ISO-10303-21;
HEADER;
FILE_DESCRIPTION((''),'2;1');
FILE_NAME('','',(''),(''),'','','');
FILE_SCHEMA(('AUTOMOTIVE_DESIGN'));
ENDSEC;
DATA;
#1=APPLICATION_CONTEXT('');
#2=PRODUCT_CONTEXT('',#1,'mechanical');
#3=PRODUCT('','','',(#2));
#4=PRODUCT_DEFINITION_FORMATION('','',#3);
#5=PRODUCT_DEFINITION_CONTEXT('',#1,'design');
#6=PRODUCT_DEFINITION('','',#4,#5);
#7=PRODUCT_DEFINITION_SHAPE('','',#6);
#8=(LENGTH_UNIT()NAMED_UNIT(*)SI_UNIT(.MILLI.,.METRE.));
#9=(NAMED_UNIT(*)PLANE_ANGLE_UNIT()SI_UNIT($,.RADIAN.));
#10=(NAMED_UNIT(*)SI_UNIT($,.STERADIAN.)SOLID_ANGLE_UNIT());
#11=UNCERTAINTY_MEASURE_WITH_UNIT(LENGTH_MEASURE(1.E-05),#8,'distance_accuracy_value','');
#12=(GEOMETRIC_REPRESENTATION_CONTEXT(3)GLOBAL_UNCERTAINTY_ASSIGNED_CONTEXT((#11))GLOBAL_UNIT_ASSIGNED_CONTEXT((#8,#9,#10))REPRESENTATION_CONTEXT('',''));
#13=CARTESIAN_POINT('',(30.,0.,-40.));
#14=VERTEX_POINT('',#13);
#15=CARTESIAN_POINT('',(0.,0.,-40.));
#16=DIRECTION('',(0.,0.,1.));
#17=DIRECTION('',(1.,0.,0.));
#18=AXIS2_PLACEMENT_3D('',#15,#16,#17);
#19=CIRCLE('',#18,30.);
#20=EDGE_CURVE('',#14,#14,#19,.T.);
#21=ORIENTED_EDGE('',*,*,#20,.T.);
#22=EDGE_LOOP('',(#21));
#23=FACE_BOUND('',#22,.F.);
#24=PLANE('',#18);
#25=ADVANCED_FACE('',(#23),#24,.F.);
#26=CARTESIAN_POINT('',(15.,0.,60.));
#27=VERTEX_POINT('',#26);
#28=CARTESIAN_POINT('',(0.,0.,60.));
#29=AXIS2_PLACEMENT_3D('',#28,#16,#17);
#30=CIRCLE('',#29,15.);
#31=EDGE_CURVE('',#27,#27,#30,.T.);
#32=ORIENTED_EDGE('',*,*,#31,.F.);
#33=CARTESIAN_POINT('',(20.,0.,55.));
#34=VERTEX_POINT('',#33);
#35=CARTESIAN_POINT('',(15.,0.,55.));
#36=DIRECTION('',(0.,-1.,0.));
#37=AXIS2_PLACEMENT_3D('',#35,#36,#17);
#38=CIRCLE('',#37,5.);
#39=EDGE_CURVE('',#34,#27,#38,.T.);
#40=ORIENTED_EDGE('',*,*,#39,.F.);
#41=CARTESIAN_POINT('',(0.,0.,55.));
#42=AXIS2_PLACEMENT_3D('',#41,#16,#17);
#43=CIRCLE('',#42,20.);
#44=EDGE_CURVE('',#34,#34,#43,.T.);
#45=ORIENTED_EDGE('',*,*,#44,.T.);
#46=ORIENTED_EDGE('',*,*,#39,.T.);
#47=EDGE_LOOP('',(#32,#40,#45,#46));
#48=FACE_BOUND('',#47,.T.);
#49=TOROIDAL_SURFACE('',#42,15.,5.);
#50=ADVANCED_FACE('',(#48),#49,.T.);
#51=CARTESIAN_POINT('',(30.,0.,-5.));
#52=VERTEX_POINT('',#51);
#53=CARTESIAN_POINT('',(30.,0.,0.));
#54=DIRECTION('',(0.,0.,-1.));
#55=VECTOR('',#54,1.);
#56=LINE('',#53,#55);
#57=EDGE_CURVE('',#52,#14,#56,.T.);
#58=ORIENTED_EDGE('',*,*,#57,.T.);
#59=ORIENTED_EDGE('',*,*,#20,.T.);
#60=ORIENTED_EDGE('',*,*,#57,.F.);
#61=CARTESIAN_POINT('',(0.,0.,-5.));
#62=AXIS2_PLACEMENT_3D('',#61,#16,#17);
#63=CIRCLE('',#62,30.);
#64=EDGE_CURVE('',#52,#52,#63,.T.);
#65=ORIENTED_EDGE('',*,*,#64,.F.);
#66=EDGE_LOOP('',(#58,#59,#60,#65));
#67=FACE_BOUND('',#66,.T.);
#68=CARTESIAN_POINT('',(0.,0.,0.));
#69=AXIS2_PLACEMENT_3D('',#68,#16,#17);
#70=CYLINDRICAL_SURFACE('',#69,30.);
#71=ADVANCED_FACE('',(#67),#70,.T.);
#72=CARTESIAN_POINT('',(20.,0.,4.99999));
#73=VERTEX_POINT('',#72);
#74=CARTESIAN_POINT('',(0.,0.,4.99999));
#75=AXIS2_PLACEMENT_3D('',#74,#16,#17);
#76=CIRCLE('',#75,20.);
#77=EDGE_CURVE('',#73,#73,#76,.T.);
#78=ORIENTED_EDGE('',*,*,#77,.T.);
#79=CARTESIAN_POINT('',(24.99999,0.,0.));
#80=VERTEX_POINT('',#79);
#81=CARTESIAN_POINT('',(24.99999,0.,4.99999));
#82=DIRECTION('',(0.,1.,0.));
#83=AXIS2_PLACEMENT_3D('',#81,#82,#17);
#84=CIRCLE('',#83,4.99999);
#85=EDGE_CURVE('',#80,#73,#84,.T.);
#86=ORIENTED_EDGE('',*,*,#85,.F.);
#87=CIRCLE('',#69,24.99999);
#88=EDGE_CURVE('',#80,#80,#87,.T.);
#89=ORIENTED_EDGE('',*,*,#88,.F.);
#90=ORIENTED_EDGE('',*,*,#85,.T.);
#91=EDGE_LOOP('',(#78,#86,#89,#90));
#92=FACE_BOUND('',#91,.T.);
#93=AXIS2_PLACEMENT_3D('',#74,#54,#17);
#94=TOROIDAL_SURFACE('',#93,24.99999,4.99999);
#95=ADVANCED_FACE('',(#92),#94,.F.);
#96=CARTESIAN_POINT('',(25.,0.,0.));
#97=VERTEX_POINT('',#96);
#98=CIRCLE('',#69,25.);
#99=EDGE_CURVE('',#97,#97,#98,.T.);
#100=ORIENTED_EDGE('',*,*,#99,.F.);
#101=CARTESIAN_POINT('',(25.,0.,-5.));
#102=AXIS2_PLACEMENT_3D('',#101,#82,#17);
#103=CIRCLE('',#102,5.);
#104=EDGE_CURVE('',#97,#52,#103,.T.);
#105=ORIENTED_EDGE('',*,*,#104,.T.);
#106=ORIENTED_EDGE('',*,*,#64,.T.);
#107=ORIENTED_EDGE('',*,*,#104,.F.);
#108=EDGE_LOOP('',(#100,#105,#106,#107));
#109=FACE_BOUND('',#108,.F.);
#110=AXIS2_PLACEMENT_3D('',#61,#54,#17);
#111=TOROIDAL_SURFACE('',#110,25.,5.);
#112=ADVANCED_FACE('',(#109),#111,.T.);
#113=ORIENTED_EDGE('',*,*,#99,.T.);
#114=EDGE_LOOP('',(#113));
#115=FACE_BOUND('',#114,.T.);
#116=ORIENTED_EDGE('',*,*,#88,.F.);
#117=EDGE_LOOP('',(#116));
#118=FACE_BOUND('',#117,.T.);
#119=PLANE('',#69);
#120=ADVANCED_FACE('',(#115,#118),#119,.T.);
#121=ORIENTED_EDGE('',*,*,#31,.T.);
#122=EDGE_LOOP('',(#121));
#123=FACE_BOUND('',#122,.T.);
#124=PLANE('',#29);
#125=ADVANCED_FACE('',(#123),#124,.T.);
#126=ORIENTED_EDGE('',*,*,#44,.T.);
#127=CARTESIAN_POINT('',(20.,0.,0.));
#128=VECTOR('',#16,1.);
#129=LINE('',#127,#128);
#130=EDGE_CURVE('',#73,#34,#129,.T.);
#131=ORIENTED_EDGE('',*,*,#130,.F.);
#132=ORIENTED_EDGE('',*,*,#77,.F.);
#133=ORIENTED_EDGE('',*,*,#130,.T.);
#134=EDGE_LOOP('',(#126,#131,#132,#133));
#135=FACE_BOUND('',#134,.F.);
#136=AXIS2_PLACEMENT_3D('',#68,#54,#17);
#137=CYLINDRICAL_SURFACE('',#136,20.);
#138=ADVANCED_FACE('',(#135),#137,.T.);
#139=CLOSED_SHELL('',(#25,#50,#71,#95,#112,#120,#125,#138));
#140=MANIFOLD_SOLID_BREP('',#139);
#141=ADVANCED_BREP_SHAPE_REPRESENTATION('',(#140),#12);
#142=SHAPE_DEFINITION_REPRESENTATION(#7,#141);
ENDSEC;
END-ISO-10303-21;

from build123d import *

# Parameters (mm, degrees)
F0_R     = 20
F1_DEPTH = 60
F0_R_2   = 30
F2_DEPTH = 40
F3_R     = 5
F4_R     = 5
F5_R     = 4.99999


# Not quite as in the source:
# - a fillet or chamfer is up to 0.001 mm smaller than in the source, because OpenCascade refuses the exact size


with BuildPart() as f1:
    # F0 (on Top) → F1 (new body)
    with BuildSketch(Plane.XY):
        Circle(F0_R)
    extrude(amount=F1_DEPTH)

    # F0 (on Top) → F2 (join)
    with BuildSketch(Plane.XY):
        Circle(F0_R_2)
        Circle(F0_R, mode=Mode.SUBTRACT)
        Circle(F0_R)
    extrude(amount=-F2_DEPTH)

    # F3
    f3_edges = [f1.edges().sort_by_distance(p)[0] for p in [
        (-20, 0, 60),
    ]]
    fillet(f3_edges, radius=F3_R)

    # F4
    f4_edges = [f1.edges().sort_by_distance(p)[0] for p in [
        (-30, 0, 0),
    ]]
    fillet(f4_edges, radius=F4_R)

    # F5 (radius 5 in the source; OpenCascade refuses exactly that, so slightly less here)
    f5_edges = [f1.edges().sort_by_distance(p)[0] for p in [
        (-20, 0, 0),
    ]]
    fillet(f5_edges, radius=F5_R)


solid = f1.part
